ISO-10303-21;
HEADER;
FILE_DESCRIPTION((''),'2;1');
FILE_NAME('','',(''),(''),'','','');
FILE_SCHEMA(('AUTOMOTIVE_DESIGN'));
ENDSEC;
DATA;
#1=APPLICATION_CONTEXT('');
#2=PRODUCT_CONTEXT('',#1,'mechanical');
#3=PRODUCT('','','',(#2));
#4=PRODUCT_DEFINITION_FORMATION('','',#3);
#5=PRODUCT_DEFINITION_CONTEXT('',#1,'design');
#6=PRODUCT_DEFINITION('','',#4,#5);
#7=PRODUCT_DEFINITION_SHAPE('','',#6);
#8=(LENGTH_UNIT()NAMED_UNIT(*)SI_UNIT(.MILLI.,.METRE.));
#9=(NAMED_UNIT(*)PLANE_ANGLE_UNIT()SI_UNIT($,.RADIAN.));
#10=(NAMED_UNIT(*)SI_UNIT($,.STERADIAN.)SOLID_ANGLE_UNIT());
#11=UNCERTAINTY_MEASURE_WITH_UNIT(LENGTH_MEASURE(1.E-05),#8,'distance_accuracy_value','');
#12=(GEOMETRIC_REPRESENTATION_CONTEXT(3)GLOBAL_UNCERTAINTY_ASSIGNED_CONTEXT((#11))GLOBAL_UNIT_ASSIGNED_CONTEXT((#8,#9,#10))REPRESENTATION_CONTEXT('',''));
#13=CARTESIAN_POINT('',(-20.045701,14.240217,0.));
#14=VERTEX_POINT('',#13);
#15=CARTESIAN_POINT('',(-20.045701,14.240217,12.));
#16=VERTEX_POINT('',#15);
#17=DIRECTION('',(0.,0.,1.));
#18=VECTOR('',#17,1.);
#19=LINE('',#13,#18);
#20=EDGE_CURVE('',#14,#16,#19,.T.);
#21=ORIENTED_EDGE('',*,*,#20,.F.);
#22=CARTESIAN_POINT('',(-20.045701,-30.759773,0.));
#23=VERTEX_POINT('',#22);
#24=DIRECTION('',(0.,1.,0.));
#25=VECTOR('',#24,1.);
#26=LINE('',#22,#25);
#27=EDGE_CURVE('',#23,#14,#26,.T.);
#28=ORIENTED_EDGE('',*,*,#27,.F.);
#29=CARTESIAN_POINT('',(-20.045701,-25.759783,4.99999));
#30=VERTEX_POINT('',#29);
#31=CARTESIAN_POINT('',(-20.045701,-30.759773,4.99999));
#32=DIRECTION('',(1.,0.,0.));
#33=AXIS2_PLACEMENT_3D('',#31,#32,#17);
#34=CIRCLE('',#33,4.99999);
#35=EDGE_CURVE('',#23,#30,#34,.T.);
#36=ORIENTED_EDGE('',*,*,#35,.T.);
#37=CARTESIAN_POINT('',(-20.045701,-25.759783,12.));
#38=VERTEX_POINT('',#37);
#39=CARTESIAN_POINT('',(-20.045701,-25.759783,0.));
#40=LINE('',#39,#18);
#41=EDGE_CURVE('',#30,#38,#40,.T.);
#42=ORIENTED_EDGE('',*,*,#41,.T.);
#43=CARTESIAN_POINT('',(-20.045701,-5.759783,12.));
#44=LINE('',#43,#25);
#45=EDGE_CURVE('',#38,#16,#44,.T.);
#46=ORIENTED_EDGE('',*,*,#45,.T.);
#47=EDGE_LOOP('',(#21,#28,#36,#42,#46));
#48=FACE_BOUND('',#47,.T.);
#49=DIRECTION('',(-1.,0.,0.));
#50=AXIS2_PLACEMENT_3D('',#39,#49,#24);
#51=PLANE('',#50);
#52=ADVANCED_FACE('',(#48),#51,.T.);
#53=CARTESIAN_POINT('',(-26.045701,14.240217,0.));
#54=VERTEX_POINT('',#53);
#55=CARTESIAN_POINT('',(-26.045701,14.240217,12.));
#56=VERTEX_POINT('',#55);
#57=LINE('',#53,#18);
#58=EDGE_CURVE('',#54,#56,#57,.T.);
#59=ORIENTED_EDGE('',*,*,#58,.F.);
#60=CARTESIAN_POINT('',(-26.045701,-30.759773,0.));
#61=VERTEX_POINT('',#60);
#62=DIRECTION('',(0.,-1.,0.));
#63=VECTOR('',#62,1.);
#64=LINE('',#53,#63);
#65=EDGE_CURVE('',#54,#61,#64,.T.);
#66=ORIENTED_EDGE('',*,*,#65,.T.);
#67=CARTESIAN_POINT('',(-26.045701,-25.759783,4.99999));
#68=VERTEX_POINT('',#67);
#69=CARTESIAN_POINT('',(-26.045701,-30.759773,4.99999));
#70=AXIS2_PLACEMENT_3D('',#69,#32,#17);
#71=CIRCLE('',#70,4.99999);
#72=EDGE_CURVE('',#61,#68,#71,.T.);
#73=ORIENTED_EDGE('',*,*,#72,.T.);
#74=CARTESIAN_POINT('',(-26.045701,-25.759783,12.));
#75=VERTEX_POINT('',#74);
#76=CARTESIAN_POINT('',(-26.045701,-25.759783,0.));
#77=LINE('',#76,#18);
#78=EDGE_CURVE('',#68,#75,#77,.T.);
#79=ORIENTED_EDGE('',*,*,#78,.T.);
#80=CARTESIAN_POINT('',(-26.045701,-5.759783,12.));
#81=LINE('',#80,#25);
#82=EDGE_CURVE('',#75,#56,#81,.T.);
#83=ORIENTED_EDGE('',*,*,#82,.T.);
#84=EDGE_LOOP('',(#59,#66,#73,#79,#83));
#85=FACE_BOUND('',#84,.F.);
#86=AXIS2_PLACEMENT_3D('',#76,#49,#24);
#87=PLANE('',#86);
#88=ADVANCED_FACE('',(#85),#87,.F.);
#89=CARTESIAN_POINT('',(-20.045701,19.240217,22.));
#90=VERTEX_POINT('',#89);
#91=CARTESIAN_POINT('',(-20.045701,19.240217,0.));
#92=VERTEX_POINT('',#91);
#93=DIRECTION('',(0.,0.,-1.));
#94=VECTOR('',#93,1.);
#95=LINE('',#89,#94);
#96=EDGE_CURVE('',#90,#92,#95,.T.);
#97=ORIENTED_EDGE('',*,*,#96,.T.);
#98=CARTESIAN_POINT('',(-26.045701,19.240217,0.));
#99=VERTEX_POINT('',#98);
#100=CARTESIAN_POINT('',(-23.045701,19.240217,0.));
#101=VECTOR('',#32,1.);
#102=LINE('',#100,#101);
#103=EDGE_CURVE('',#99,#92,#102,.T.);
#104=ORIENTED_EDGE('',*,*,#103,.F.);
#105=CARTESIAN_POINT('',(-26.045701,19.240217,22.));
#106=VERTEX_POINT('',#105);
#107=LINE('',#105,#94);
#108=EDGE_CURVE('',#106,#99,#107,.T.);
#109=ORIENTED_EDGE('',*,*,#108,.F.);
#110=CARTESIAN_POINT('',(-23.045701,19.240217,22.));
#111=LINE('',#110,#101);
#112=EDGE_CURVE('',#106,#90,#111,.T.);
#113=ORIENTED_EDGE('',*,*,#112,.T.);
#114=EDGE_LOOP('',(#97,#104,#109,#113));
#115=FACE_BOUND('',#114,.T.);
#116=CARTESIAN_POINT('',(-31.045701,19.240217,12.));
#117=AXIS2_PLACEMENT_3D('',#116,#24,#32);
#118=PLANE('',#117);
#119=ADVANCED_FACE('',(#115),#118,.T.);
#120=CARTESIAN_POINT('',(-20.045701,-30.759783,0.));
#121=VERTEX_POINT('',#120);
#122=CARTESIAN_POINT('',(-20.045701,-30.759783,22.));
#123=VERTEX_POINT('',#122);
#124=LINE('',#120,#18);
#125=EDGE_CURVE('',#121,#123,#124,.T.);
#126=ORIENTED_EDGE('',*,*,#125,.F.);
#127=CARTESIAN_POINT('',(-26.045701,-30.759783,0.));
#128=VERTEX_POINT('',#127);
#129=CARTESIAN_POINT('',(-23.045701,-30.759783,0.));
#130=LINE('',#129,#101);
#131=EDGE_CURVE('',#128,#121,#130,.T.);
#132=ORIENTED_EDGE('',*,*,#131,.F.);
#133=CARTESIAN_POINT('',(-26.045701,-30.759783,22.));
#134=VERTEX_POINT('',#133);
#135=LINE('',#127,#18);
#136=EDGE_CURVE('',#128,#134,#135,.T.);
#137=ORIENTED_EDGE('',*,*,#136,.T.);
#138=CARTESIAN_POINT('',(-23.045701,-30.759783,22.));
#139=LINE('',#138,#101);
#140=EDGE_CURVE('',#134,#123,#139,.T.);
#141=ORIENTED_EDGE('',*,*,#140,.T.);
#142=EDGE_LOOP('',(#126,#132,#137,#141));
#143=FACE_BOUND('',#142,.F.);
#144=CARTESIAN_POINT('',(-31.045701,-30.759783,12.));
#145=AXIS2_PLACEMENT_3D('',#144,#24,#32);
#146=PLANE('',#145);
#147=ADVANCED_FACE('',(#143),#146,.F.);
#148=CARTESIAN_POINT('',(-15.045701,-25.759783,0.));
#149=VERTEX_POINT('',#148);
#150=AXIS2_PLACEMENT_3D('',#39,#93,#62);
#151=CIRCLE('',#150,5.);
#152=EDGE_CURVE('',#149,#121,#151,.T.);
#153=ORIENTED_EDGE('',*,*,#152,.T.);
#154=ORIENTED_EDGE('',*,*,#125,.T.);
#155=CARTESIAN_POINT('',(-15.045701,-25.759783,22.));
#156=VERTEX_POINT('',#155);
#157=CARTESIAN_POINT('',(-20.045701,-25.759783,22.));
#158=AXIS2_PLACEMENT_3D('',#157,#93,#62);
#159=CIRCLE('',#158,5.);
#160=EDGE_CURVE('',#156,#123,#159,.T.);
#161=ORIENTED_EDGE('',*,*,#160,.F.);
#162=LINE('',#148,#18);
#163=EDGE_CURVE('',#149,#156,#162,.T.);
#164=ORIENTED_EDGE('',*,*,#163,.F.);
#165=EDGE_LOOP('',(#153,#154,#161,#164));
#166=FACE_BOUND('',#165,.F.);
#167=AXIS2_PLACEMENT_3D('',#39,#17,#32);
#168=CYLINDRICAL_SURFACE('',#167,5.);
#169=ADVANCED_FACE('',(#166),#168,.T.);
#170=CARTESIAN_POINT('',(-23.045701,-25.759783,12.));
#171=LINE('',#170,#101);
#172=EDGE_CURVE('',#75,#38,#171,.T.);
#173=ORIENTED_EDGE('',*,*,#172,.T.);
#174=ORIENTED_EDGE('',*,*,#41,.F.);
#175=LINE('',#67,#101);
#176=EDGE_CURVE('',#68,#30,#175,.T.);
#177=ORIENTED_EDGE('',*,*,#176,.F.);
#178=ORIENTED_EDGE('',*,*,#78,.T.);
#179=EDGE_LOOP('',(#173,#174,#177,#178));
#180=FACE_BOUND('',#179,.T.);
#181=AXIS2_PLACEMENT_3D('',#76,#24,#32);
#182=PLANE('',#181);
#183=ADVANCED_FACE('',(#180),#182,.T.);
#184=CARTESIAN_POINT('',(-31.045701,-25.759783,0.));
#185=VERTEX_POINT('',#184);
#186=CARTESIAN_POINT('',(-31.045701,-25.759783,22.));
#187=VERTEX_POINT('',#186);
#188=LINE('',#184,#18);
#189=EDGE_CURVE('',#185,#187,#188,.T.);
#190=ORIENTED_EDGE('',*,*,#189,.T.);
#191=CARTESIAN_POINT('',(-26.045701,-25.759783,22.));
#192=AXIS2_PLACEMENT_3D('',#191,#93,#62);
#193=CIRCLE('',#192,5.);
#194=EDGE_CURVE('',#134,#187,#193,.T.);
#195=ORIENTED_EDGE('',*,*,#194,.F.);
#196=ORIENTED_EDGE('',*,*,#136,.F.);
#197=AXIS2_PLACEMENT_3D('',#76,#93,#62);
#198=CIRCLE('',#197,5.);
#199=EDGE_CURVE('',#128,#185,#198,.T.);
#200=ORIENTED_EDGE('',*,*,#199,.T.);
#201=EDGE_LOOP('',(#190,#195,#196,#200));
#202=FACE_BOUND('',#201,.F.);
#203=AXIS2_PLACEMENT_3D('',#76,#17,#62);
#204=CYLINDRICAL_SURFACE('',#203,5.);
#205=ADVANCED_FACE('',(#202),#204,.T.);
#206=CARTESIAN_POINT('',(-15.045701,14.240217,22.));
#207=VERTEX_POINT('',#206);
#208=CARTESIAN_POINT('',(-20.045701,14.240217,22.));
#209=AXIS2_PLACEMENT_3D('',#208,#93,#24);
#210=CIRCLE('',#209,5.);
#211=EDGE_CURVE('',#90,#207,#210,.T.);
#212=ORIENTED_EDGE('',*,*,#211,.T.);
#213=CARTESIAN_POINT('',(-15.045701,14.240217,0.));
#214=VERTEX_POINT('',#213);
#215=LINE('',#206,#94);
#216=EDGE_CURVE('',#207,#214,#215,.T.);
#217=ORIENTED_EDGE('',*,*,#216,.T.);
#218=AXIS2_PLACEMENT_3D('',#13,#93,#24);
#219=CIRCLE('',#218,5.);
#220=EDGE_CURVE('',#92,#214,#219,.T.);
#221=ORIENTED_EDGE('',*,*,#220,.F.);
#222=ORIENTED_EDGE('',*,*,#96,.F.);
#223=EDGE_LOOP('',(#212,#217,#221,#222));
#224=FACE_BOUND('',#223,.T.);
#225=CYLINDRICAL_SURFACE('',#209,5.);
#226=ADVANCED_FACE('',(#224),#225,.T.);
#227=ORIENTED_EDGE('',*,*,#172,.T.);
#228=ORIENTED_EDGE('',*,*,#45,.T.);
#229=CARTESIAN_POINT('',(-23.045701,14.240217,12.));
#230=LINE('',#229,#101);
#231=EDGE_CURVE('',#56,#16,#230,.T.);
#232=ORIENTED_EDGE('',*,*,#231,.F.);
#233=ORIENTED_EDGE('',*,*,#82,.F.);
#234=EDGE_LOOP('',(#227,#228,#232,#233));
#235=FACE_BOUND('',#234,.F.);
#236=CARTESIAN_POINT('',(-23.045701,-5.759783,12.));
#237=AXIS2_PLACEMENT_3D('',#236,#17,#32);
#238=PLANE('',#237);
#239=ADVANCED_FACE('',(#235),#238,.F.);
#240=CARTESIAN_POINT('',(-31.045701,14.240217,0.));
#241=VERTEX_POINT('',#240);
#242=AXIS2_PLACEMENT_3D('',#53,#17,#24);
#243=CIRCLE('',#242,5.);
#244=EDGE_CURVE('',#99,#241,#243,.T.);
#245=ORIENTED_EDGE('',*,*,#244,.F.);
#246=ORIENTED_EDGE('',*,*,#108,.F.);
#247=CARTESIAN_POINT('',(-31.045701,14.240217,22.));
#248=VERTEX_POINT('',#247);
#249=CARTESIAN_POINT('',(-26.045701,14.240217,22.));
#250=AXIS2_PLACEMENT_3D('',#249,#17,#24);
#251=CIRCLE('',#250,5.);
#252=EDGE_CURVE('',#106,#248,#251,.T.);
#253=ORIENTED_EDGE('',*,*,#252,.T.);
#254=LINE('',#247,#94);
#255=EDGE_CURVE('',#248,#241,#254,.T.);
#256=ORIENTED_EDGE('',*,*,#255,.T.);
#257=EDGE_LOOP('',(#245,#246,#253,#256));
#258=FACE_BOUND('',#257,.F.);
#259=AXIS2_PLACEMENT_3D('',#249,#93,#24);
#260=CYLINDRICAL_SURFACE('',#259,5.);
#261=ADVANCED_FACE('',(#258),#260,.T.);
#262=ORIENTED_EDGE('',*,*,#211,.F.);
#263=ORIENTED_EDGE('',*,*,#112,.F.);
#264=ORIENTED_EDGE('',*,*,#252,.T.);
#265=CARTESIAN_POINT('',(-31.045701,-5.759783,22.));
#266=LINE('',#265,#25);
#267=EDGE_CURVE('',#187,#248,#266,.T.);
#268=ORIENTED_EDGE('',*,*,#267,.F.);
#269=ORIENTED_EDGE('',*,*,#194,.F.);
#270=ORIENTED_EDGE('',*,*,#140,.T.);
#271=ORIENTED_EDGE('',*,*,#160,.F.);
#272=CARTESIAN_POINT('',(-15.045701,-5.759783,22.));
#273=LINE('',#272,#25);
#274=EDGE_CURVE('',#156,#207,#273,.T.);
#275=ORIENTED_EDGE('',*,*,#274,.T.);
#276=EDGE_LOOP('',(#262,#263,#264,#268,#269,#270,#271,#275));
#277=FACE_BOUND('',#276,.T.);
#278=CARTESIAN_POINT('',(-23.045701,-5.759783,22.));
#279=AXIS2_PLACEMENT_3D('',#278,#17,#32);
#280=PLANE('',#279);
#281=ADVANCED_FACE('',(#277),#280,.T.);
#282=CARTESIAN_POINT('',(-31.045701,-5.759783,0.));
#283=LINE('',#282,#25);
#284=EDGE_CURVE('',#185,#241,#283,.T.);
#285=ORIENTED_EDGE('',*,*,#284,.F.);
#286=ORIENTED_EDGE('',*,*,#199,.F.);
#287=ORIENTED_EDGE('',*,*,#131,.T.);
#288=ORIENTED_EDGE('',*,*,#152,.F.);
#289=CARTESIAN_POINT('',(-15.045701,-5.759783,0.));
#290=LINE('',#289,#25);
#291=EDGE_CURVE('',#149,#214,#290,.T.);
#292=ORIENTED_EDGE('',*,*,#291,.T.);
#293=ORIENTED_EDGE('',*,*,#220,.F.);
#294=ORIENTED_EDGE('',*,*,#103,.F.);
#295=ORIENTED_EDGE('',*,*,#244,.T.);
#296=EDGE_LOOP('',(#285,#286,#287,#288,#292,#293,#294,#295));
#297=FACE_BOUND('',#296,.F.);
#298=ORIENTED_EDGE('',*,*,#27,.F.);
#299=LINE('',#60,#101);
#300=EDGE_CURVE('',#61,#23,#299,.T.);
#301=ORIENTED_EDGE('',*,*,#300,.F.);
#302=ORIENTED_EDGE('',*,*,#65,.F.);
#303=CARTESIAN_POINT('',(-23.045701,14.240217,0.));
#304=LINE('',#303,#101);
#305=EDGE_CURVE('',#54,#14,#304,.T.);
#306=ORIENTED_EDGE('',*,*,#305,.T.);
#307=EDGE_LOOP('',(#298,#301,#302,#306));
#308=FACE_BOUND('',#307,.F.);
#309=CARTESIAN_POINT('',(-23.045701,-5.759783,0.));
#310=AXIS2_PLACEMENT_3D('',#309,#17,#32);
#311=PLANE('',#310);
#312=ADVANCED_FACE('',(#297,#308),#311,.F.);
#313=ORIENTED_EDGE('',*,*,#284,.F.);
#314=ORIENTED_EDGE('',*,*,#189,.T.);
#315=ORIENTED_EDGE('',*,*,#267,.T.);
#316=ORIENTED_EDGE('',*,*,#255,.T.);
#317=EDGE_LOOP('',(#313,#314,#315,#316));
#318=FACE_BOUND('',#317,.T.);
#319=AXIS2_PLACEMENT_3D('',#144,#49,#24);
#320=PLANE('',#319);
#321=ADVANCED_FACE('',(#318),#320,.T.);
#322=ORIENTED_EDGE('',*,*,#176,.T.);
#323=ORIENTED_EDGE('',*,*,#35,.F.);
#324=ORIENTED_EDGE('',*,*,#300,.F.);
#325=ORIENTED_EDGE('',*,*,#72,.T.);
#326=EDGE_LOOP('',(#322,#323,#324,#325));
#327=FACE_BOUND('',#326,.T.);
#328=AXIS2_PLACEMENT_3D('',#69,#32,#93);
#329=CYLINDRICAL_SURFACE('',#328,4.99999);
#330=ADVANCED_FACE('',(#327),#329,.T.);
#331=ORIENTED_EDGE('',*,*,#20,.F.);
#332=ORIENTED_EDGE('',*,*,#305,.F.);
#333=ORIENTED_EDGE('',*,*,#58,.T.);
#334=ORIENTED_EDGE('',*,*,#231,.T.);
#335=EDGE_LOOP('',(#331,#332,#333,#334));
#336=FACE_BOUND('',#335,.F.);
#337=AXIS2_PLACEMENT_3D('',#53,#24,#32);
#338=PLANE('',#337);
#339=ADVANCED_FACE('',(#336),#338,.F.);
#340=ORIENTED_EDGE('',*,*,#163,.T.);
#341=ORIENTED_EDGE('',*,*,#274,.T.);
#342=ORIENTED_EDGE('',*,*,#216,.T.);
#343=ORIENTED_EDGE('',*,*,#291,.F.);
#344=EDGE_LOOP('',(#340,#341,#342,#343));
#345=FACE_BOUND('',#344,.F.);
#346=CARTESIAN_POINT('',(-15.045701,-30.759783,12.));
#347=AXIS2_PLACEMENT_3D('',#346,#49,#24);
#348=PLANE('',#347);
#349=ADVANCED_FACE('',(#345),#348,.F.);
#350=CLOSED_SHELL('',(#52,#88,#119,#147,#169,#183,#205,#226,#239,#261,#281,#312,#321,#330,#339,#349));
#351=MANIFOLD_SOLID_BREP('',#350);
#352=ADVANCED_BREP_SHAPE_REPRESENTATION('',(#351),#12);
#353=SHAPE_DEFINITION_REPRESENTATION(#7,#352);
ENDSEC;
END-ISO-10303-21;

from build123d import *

# Parameters (mm, degrees)
F0_W     = 16
F0_H     = 50
F0_W_2   = 6
F0_H_2   = 40
F1_DEPTH = 12
F2_W     = 16
F2_H     = 50
F3_DEPTH = 10
F4_R     = 4.99999
F5_R     = 5


# Not quite as in the source:
# - a fillet or chamfer is up to 0.001 mm smaller than in the source, because OpenCascade refuses the exact size


with BuildPart() as f1:
    # F0 (on Top) → F1 (new body)
    with BuildSketch(Plane.XY):
        with Locations((-23.0457014143, -5.7597834617)):
            Rectangle(F0_W, F0_H)
        with Locations((-23.0457014143, -5.7597834617)):
            Rectangle(F0_W_2, F0_H_2, mode=Mode.SUBTRACT)
    extrude(amount=F1_DEPTH)

    # F2 (on face) → F3 (join)
    with BuildSketch(Plane.XY.offset(12)):
        with Locations((-23.0457014143, -5.7597834617)):
            Rectangle(F2_W, F2_H)
    extrude(amount=F3_DEPTH)

    # F4 (radius 5 in the source; OpenCascade refuses exactly that, so slightly less here)
    f4_edges = [f1.edges().sort_by_distance(p)[0] for p in [
        (-23.045701, -25.759783, 0),
    ]]
    fillet(f4_edges, radius=F4_R)

    # F5
    f5_edges = [f1.edges().sort_by_distance(p)[0] for p in [
        (-15.045701, 19.240217, 11),
        (-15.045701, -30.759783, 11),
        (-31.045701, -30.759783, 11),
        (-31.045701, 19.240217, 11),
    ]]
    fillet(f5_edges, radius=F5_R)


solid = f1.part
